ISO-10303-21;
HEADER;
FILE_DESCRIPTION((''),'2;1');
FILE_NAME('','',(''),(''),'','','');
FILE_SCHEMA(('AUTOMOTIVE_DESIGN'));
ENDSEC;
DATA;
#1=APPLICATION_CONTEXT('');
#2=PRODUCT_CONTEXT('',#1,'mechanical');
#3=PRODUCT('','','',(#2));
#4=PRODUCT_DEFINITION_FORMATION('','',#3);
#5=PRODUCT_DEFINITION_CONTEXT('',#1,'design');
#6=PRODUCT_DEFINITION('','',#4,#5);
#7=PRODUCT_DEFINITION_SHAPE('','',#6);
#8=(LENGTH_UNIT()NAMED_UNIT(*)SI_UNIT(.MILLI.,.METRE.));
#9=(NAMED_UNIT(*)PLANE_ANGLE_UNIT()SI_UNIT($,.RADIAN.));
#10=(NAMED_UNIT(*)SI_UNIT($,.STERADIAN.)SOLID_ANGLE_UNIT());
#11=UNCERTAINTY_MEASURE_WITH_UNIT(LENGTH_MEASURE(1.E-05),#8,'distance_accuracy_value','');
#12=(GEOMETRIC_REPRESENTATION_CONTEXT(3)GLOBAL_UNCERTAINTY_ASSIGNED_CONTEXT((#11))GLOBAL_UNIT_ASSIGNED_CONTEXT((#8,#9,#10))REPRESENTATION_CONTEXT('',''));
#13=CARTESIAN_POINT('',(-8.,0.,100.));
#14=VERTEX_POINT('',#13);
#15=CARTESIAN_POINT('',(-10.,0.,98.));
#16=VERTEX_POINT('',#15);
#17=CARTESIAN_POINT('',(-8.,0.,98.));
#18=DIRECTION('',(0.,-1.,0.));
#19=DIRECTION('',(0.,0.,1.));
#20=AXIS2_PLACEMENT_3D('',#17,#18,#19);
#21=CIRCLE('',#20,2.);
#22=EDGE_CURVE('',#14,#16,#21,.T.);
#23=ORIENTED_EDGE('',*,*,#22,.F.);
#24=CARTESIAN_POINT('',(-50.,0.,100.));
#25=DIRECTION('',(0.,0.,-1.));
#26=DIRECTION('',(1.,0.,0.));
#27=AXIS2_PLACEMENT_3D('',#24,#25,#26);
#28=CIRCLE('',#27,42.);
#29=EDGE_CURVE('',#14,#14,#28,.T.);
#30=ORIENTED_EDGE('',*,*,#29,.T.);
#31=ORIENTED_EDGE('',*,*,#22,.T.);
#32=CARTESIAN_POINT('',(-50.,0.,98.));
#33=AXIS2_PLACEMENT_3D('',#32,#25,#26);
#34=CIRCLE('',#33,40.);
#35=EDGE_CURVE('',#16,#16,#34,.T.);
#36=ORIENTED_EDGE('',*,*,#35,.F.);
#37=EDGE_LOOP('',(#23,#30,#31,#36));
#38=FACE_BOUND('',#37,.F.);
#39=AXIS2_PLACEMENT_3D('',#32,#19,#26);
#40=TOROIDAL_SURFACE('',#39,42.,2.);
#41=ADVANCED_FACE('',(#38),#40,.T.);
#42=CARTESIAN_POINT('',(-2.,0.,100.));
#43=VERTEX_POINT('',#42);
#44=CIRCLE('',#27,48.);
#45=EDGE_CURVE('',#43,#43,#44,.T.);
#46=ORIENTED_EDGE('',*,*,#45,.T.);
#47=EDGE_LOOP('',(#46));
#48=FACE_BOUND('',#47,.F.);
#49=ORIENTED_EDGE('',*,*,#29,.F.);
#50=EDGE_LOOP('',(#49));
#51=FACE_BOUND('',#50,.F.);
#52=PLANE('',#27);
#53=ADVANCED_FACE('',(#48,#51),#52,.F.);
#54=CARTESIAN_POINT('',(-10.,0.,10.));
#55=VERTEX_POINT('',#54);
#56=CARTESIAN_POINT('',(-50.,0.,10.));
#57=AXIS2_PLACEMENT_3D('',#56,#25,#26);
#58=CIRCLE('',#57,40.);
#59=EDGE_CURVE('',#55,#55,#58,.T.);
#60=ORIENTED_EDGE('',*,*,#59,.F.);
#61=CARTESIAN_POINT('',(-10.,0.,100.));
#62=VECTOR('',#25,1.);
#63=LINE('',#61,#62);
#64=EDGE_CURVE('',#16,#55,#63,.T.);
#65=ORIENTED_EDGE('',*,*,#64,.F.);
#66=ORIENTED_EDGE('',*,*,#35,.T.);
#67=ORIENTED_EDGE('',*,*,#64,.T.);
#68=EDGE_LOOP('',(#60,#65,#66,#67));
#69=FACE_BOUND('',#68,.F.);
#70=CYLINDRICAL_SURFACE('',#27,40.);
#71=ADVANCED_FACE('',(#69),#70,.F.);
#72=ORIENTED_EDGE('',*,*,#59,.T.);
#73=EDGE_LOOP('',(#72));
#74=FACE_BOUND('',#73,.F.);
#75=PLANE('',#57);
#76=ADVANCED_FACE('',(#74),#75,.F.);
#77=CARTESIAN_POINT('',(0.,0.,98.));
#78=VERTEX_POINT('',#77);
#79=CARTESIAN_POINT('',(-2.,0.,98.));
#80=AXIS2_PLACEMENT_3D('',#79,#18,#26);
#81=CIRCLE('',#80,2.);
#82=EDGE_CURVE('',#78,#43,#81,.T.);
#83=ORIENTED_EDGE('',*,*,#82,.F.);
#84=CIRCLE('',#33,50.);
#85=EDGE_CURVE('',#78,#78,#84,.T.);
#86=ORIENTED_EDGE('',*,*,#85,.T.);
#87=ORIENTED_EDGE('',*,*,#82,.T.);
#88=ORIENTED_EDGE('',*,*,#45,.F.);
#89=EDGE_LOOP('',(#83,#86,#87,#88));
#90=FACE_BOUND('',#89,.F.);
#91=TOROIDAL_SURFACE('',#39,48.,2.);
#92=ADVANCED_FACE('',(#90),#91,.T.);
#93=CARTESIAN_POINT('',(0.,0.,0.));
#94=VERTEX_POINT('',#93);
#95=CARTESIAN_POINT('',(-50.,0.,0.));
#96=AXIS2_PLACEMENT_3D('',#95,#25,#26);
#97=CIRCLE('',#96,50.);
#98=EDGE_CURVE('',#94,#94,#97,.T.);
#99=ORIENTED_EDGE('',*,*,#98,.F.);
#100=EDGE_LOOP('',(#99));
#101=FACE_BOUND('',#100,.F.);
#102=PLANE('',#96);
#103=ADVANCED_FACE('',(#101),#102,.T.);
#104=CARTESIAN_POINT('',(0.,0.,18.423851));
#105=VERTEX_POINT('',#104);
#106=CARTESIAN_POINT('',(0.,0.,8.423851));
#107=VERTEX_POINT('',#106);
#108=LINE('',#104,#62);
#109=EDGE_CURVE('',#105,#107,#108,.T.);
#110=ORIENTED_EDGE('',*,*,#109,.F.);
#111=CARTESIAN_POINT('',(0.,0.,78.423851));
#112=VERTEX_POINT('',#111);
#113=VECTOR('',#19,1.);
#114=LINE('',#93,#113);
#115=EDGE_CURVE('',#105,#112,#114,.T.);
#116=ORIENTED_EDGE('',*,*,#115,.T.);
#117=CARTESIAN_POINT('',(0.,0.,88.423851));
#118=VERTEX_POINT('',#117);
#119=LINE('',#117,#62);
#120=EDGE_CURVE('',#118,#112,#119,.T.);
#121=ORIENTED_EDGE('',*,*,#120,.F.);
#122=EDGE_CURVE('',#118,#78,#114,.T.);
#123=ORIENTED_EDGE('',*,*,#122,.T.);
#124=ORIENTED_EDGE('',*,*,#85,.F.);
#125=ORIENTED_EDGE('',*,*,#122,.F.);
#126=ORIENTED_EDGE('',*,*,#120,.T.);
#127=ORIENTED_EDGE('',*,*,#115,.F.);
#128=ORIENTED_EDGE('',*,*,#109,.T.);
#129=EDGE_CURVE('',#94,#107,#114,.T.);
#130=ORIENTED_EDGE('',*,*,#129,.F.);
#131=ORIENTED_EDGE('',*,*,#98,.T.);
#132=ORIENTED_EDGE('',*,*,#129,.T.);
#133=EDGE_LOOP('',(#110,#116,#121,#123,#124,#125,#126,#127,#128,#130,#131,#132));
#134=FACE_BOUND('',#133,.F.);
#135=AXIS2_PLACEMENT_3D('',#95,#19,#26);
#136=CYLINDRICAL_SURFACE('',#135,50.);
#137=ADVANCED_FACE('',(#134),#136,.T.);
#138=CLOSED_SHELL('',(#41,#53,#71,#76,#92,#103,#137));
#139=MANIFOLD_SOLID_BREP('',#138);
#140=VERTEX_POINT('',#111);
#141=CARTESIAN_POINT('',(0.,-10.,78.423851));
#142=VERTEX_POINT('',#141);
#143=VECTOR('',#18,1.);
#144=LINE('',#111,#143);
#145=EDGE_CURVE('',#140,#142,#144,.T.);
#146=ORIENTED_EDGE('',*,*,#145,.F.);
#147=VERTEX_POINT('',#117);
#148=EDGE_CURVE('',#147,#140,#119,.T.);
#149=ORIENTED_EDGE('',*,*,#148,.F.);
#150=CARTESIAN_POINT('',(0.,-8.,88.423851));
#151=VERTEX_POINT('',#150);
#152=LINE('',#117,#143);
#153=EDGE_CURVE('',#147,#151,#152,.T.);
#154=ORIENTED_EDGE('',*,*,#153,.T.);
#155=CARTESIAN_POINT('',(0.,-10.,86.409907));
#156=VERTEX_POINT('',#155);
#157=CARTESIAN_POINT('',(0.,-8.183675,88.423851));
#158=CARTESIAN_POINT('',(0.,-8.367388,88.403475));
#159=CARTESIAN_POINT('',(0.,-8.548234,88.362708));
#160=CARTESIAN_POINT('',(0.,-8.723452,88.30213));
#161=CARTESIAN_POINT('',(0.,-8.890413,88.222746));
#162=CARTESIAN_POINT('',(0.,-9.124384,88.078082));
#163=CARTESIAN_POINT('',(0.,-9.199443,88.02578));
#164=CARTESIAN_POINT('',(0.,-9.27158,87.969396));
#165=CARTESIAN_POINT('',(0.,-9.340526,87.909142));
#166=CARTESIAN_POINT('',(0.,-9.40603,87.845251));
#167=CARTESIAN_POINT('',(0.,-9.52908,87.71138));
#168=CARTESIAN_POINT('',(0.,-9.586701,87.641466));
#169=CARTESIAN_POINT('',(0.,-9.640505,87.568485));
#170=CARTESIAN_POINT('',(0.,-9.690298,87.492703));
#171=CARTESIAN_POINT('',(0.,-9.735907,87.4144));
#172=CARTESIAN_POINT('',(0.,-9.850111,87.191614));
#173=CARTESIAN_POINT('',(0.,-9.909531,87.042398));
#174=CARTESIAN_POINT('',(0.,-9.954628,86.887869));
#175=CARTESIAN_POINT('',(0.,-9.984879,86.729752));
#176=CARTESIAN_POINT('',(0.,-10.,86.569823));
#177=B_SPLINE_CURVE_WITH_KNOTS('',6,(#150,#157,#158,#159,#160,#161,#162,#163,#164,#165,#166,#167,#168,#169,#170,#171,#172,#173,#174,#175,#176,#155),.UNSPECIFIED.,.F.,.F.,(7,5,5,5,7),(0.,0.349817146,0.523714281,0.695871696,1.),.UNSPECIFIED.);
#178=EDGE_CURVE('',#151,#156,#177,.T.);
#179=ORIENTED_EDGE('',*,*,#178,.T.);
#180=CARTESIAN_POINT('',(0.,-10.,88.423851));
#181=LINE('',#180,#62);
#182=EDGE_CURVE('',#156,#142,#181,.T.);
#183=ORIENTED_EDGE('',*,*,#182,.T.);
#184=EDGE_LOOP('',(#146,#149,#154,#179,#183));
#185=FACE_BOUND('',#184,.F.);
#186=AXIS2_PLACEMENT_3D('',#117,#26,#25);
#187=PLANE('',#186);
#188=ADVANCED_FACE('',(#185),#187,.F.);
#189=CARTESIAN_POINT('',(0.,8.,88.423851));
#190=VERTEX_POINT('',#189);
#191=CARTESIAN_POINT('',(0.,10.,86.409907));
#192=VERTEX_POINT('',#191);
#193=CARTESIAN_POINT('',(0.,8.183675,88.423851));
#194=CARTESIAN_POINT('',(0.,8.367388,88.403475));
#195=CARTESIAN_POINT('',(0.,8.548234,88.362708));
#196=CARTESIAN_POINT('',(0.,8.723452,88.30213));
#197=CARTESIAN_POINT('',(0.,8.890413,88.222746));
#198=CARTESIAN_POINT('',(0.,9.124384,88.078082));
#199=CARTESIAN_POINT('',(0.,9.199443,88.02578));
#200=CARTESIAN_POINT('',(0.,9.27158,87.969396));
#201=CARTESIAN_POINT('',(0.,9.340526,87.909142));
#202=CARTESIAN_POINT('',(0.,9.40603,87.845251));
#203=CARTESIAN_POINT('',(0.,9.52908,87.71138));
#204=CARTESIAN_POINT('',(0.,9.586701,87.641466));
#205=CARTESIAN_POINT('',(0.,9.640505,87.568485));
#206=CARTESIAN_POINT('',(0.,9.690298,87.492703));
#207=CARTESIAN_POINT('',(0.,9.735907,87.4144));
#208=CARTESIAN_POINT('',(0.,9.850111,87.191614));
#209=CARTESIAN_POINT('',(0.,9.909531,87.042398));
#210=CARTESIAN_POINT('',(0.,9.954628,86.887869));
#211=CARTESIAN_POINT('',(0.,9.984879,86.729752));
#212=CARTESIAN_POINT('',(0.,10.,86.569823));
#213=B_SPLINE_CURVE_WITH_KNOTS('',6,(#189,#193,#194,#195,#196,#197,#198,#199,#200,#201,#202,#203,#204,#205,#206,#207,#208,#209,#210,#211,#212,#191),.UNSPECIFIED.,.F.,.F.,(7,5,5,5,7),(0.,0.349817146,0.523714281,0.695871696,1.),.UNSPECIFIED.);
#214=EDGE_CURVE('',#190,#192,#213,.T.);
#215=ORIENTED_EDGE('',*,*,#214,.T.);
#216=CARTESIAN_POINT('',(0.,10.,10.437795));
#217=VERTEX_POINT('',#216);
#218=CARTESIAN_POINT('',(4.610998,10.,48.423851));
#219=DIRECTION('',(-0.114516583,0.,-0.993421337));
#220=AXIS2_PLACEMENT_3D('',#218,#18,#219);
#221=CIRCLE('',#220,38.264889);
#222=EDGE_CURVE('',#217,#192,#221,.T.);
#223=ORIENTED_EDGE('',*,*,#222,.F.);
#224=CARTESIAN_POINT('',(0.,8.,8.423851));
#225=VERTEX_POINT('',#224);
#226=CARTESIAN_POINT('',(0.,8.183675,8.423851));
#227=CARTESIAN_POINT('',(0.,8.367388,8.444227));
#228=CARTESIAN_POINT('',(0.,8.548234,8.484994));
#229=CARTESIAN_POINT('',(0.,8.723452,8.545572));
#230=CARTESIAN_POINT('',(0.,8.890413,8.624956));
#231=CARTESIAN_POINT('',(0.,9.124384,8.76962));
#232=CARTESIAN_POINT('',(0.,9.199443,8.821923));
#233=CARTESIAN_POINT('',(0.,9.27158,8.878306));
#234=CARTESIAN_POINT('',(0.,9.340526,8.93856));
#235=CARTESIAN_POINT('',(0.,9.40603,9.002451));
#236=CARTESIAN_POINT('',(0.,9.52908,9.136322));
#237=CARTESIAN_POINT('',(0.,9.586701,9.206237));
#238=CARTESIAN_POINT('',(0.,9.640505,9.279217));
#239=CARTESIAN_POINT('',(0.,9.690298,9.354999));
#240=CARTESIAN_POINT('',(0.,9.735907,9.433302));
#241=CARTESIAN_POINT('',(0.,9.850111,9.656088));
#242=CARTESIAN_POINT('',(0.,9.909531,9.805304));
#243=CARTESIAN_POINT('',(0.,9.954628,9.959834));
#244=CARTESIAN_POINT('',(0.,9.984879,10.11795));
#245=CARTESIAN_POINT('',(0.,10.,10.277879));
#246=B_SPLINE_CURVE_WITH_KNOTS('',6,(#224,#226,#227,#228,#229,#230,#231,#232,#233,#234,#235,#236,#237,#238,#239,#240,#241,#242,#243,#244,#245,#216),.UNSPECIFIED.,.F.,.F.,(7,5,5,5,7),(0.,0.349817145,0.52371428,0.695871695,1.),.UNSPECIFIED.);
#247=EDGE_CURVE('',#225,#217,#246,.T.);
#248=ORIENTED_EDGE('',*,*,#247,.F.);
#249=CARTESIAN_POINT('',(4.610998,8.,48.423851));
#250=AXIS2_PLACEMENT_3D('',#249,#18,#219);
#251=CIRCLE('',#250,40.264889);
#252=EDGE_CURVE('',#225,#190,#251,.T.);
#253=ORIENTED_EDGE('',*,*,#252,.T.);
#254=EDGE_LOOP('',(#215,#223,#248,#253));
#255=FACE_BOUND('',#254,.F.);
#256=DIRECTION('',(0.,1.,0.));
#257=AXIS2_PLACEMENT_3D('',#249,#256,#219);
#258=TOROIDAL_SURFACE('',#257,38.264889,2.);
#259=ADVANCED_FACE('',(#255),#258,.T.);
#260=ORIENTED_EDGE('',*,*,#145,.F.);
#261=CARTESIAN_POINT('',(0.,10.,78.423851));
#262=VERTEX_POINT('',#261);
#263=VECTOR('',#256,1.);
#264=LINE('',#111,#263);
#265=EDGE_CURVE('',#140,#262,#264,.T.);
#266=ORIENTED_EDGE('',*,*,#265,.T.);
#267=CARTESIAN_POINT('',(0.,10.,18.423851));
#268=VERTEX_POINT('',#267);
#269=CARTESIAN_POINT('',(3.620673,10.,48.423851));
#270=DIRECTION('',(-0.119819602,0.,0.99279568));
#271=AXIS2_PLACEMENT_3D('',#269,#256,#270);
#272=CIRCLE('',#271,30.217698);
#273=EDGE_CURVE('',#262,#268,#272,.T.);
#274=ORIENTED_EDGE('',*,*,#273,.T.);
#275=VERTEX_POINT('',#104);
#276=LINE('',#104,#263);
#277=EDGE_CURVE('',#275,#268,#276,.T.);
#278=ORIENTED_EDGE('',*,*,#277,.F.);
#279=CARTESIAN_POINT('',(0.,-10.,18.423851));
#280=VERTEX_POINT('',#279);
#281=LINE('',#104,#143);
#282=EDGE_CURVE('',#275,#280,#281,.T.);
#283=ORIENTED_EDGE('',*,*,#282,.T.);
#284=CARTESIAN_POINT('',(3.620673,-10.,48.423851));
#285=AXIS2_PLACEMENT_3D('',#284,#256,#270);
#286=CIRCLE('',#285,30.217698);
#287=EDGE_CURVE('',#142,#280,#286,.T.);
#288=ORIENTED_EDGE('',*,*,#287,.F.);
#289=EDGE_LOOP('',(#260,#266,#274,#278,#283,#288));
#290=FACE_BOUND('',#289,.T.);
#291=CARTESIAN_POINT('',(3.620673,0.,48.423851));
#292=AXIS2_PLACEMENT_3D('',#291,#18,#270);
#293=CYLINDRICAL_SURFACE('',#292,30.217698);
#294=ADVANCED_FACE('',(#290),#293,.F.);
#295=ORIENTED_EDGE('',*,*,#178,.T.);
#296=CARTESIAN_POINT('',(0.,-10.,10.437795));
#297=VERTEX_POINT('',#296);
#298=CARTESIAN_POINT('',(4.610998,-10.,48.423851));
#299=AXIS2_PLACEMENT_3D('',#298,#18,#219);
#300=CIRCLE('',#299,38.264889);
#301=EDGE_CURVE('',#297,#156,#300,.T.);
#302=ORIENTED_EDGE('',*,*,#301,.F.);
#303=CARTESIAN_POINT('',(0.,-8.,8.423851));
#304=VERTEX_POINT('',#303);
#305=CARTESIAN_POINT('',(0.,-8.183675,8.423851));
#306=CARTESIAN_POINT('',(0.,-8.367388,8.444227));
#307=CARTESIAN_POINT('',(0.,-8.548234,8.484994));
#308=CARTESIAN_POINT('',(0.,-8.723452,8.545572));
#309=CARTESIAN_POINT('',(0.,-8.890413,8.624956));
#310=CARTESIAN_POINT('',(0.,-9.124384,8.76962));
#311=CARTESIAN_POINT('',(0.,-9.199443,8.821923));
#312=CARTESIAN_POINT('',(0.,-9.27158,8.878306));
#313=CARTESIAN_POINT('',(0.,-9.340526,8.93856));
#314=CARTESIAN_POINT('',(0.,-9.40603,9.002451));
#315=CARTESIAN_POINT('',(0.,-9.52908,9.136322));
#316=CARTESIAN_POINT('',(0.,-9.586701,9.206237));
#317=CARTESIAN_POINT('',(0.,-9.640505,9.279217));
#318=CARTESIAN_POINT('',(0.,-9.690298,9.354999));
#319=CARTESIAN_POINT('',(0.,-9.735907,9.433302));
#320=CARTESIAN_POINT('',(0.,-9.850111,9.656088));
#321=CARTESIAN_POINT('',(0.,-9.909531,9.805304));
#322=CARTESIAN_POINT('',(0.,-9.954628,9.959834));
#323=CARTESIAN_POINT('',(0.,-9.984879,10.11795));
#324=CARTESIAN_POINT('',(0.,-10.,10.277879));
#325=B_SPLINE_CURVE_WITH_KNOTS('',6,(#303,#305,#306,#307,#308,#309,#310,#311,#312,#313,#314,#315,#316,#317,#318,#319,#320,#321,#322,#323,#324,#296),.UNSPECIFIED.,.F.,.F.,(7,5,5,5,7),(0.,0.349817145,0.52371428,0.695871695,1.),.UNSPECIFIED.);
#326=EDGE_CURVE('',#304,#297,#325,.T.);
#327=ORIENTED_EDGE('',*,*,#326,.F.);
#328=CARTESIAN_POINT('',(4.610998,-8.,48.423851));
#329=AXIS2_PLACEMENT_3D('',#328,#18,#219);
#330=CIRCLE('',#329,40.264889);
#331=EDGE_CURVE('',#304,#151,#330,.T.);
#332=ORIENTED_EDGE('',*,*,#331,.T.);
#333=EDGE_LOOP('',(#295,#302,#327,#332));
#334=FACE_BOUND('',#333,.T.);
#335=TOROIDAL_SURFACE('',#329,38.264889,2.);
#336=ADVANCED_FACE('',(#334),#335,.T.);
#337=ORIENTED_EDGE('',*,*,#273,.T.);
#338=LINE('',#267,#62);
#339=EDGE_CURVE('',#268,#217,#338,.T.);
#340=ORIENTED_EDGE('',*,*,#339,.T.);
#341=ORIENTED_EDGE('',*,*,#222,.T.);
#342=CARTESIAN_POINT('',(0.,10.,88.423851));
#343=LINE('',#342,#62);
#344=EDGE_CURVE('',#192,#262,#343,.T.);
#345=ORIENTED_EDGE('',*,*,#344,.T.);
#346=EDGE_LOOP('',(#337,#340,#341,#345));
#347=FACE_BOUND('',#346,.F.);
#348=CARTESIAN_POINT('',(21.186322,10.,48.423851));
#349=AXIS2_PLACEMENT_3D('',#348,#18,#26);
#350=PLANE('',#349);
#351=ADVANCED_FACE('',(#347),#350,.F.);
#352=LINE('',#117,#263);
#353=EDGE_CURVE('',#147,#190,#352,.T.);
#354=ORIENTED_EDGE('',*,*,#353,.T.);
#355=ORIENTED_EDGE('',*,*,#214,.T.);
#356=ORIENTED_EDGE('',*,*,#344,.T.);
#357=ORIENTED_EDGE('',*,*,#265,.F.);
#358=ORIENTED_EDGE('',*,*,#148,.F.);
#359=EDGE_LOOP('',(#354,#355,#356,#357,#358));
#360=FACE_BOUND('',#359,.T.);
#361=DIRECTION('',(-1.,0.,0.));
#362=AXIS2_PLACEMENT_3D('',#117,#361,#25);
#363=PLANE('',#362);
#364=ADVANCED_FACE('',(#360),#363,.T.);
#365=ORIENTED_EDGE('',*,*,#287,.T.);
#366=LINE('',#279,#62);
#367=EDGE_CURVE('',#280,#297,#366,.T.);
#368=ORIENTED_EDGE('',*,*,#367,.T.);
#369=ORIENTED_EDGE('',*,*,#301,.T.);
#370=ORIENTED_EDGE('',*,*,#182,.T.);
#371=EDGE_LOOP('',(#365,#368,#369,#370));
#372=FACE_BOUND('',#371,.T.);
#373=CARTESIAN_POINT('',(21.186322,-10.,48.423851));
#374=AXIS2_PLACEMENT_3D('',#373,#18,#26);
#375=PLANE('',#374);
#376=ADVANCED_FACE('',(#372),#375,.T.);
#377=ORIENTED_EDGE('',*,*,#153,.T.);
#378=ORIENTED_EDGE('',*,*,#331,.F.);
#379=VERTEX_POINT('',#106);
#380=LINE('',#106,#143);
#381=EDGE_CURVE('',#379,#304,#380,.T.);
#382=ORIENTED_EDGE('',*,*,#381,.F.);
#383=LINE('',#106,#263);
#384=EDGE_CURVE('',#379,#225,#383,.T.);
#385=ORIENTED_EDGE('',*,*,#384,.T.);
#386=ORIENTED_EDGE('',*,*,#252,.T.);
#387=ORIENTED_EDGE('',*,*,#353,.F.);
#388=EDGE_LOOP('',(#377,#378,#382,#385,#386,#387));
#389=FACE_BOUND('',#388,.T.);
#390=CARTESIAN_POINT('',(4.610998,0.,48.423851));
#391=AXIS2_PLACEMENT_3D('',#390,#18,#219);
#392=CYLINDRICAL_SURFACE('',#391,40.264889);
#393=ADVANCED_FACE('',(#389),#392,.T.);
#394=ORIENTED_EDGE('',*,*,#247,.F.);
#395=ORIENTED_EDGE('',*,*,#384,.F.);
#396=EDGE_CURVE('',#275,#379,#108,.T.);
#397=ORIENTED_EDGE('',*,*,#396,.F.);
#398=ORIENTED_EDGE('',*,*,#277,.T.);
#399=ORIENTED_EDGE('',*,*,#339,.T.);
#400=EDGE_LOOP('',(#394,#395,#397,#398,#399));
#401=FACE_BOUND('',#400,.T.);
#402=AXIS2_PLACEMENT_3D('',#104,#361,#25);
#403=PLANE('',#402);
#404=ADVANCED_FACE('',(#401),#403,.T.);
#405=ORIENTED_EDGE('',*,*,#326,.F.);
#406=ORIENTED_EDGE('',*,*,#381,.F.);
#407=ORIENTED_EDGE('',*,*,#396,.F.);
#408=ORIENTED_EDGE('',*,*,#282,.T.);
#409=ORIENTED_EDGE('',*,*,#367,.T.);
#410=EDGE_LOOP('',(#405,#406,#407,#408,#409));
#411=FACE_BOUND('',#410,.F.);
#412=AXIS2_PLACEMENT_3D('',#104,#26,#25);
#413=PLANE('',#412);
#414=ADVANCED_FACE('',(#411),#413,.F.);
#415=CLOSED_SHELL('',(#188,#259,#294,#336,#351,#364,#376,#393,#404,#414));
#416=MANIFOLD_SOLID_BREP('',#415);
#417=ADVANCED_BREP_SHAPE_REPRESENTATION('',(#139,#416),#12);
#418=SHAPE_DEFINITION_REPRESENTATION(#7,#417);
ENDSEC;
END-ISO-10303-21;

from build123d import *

# Parameters (mm, degrees)
F3_DEPTH = 10
F4_DEPTH = 10
F6_R     = 2


# Not quite as in the source:
# - a fillet or chamfer that OpenCascade refuses, or shapes differently, is made with other operations: its cross-section is extruded or revolved along the edge and cut away or added


with BuildPart() as f1:
    # F0 (on Front) → F1 (revolve)
    with BuildSketch(Plane.XZ):
        Polygon((-50, 0), (0, 0), (0, 100), (-10, 100), (-10, 10), (-50, 10), align=None)
    revolve(axis=Axis((-50, 0, 5), (0, 0, -1)))

    # F2 (on Front) → F3 (join)
    with BuildSketch(Plane.XZ):
        with BuildLine():
            Line((0, 18.4238510507), (0, 8.4238510507))
            ThreePointArc((0, 8.4238510507), (44.875886677, 48.4238510507), (0, 88.4238510507))
            Line((0, 88.4238510507), (0, 78.4238510507))
            ThreePointArc((0, 78.4238510507), (33.8383705003, 48.4238510507), (0, 18.4238510507))
        make_face()
    extrude(amount=F3_DEPTH)

    # F2 (on Front) → F4 (join)
    with BuildSketch(Plane.XZ):
        with BuildLine():
            Line((0, 18.4238510507), (0, 8.4238510507))
            ThreePointArc((0, 8.4238510507), (44.875886677, 48.4238510507), (0, 88.4238510507))
            Line((0, 88.4238510507), (0, 78.4238510507))
            ThreePointArc((0, 78.4238510507), (33.8383705003, 48.4238510507), (0, 18.4238510507))
        make_face()
    extrude(amount=-F4_DEPTH)

    # F5: fillet of radius 2 on 2 edges, made by hand

    # F5_s1 → F5_t2 (revolve, cut)
    with BuildSketch(Plane.XZ):
        with BuildLine():
            ThreePointArc((0, 98), (-0.5857864376, 99.4142135624), (-2, 100))
            Line((-2, 100), (0, 100))
            Line((0, 100), (0, 98))
        make_face()
    revolve(axis=Axis((-50, 0, 100), (0, 0, -1)), mode=Mode.SUBTRACT)

    # F5_s3 → F5_t4 (revolve, cut)
    with BuildSketch(Plane.XZ):
        with BuildLine():
            ThreePointArc((-8, 100), (-9.4142135624, 99.4142135624), (-10, 98))
            Line((-10, 98), (-10, 100))
            Line((-10, 100), (-8, 100))
        make_face()
    revolve(axis=Axis((-50, 0, 100), (0, 0, -1)), mode=Mode.SUBTRACT)

    # F6
    f6_edges = [f1.edges().sort_by_distance(p)[0] for p in [
        (44.875887, -10, 48.423851),
        (44.875887, 10, 48.423851),
    ]]
    fillet(f6_edges, radius=F6_R)


solid = f1.part
